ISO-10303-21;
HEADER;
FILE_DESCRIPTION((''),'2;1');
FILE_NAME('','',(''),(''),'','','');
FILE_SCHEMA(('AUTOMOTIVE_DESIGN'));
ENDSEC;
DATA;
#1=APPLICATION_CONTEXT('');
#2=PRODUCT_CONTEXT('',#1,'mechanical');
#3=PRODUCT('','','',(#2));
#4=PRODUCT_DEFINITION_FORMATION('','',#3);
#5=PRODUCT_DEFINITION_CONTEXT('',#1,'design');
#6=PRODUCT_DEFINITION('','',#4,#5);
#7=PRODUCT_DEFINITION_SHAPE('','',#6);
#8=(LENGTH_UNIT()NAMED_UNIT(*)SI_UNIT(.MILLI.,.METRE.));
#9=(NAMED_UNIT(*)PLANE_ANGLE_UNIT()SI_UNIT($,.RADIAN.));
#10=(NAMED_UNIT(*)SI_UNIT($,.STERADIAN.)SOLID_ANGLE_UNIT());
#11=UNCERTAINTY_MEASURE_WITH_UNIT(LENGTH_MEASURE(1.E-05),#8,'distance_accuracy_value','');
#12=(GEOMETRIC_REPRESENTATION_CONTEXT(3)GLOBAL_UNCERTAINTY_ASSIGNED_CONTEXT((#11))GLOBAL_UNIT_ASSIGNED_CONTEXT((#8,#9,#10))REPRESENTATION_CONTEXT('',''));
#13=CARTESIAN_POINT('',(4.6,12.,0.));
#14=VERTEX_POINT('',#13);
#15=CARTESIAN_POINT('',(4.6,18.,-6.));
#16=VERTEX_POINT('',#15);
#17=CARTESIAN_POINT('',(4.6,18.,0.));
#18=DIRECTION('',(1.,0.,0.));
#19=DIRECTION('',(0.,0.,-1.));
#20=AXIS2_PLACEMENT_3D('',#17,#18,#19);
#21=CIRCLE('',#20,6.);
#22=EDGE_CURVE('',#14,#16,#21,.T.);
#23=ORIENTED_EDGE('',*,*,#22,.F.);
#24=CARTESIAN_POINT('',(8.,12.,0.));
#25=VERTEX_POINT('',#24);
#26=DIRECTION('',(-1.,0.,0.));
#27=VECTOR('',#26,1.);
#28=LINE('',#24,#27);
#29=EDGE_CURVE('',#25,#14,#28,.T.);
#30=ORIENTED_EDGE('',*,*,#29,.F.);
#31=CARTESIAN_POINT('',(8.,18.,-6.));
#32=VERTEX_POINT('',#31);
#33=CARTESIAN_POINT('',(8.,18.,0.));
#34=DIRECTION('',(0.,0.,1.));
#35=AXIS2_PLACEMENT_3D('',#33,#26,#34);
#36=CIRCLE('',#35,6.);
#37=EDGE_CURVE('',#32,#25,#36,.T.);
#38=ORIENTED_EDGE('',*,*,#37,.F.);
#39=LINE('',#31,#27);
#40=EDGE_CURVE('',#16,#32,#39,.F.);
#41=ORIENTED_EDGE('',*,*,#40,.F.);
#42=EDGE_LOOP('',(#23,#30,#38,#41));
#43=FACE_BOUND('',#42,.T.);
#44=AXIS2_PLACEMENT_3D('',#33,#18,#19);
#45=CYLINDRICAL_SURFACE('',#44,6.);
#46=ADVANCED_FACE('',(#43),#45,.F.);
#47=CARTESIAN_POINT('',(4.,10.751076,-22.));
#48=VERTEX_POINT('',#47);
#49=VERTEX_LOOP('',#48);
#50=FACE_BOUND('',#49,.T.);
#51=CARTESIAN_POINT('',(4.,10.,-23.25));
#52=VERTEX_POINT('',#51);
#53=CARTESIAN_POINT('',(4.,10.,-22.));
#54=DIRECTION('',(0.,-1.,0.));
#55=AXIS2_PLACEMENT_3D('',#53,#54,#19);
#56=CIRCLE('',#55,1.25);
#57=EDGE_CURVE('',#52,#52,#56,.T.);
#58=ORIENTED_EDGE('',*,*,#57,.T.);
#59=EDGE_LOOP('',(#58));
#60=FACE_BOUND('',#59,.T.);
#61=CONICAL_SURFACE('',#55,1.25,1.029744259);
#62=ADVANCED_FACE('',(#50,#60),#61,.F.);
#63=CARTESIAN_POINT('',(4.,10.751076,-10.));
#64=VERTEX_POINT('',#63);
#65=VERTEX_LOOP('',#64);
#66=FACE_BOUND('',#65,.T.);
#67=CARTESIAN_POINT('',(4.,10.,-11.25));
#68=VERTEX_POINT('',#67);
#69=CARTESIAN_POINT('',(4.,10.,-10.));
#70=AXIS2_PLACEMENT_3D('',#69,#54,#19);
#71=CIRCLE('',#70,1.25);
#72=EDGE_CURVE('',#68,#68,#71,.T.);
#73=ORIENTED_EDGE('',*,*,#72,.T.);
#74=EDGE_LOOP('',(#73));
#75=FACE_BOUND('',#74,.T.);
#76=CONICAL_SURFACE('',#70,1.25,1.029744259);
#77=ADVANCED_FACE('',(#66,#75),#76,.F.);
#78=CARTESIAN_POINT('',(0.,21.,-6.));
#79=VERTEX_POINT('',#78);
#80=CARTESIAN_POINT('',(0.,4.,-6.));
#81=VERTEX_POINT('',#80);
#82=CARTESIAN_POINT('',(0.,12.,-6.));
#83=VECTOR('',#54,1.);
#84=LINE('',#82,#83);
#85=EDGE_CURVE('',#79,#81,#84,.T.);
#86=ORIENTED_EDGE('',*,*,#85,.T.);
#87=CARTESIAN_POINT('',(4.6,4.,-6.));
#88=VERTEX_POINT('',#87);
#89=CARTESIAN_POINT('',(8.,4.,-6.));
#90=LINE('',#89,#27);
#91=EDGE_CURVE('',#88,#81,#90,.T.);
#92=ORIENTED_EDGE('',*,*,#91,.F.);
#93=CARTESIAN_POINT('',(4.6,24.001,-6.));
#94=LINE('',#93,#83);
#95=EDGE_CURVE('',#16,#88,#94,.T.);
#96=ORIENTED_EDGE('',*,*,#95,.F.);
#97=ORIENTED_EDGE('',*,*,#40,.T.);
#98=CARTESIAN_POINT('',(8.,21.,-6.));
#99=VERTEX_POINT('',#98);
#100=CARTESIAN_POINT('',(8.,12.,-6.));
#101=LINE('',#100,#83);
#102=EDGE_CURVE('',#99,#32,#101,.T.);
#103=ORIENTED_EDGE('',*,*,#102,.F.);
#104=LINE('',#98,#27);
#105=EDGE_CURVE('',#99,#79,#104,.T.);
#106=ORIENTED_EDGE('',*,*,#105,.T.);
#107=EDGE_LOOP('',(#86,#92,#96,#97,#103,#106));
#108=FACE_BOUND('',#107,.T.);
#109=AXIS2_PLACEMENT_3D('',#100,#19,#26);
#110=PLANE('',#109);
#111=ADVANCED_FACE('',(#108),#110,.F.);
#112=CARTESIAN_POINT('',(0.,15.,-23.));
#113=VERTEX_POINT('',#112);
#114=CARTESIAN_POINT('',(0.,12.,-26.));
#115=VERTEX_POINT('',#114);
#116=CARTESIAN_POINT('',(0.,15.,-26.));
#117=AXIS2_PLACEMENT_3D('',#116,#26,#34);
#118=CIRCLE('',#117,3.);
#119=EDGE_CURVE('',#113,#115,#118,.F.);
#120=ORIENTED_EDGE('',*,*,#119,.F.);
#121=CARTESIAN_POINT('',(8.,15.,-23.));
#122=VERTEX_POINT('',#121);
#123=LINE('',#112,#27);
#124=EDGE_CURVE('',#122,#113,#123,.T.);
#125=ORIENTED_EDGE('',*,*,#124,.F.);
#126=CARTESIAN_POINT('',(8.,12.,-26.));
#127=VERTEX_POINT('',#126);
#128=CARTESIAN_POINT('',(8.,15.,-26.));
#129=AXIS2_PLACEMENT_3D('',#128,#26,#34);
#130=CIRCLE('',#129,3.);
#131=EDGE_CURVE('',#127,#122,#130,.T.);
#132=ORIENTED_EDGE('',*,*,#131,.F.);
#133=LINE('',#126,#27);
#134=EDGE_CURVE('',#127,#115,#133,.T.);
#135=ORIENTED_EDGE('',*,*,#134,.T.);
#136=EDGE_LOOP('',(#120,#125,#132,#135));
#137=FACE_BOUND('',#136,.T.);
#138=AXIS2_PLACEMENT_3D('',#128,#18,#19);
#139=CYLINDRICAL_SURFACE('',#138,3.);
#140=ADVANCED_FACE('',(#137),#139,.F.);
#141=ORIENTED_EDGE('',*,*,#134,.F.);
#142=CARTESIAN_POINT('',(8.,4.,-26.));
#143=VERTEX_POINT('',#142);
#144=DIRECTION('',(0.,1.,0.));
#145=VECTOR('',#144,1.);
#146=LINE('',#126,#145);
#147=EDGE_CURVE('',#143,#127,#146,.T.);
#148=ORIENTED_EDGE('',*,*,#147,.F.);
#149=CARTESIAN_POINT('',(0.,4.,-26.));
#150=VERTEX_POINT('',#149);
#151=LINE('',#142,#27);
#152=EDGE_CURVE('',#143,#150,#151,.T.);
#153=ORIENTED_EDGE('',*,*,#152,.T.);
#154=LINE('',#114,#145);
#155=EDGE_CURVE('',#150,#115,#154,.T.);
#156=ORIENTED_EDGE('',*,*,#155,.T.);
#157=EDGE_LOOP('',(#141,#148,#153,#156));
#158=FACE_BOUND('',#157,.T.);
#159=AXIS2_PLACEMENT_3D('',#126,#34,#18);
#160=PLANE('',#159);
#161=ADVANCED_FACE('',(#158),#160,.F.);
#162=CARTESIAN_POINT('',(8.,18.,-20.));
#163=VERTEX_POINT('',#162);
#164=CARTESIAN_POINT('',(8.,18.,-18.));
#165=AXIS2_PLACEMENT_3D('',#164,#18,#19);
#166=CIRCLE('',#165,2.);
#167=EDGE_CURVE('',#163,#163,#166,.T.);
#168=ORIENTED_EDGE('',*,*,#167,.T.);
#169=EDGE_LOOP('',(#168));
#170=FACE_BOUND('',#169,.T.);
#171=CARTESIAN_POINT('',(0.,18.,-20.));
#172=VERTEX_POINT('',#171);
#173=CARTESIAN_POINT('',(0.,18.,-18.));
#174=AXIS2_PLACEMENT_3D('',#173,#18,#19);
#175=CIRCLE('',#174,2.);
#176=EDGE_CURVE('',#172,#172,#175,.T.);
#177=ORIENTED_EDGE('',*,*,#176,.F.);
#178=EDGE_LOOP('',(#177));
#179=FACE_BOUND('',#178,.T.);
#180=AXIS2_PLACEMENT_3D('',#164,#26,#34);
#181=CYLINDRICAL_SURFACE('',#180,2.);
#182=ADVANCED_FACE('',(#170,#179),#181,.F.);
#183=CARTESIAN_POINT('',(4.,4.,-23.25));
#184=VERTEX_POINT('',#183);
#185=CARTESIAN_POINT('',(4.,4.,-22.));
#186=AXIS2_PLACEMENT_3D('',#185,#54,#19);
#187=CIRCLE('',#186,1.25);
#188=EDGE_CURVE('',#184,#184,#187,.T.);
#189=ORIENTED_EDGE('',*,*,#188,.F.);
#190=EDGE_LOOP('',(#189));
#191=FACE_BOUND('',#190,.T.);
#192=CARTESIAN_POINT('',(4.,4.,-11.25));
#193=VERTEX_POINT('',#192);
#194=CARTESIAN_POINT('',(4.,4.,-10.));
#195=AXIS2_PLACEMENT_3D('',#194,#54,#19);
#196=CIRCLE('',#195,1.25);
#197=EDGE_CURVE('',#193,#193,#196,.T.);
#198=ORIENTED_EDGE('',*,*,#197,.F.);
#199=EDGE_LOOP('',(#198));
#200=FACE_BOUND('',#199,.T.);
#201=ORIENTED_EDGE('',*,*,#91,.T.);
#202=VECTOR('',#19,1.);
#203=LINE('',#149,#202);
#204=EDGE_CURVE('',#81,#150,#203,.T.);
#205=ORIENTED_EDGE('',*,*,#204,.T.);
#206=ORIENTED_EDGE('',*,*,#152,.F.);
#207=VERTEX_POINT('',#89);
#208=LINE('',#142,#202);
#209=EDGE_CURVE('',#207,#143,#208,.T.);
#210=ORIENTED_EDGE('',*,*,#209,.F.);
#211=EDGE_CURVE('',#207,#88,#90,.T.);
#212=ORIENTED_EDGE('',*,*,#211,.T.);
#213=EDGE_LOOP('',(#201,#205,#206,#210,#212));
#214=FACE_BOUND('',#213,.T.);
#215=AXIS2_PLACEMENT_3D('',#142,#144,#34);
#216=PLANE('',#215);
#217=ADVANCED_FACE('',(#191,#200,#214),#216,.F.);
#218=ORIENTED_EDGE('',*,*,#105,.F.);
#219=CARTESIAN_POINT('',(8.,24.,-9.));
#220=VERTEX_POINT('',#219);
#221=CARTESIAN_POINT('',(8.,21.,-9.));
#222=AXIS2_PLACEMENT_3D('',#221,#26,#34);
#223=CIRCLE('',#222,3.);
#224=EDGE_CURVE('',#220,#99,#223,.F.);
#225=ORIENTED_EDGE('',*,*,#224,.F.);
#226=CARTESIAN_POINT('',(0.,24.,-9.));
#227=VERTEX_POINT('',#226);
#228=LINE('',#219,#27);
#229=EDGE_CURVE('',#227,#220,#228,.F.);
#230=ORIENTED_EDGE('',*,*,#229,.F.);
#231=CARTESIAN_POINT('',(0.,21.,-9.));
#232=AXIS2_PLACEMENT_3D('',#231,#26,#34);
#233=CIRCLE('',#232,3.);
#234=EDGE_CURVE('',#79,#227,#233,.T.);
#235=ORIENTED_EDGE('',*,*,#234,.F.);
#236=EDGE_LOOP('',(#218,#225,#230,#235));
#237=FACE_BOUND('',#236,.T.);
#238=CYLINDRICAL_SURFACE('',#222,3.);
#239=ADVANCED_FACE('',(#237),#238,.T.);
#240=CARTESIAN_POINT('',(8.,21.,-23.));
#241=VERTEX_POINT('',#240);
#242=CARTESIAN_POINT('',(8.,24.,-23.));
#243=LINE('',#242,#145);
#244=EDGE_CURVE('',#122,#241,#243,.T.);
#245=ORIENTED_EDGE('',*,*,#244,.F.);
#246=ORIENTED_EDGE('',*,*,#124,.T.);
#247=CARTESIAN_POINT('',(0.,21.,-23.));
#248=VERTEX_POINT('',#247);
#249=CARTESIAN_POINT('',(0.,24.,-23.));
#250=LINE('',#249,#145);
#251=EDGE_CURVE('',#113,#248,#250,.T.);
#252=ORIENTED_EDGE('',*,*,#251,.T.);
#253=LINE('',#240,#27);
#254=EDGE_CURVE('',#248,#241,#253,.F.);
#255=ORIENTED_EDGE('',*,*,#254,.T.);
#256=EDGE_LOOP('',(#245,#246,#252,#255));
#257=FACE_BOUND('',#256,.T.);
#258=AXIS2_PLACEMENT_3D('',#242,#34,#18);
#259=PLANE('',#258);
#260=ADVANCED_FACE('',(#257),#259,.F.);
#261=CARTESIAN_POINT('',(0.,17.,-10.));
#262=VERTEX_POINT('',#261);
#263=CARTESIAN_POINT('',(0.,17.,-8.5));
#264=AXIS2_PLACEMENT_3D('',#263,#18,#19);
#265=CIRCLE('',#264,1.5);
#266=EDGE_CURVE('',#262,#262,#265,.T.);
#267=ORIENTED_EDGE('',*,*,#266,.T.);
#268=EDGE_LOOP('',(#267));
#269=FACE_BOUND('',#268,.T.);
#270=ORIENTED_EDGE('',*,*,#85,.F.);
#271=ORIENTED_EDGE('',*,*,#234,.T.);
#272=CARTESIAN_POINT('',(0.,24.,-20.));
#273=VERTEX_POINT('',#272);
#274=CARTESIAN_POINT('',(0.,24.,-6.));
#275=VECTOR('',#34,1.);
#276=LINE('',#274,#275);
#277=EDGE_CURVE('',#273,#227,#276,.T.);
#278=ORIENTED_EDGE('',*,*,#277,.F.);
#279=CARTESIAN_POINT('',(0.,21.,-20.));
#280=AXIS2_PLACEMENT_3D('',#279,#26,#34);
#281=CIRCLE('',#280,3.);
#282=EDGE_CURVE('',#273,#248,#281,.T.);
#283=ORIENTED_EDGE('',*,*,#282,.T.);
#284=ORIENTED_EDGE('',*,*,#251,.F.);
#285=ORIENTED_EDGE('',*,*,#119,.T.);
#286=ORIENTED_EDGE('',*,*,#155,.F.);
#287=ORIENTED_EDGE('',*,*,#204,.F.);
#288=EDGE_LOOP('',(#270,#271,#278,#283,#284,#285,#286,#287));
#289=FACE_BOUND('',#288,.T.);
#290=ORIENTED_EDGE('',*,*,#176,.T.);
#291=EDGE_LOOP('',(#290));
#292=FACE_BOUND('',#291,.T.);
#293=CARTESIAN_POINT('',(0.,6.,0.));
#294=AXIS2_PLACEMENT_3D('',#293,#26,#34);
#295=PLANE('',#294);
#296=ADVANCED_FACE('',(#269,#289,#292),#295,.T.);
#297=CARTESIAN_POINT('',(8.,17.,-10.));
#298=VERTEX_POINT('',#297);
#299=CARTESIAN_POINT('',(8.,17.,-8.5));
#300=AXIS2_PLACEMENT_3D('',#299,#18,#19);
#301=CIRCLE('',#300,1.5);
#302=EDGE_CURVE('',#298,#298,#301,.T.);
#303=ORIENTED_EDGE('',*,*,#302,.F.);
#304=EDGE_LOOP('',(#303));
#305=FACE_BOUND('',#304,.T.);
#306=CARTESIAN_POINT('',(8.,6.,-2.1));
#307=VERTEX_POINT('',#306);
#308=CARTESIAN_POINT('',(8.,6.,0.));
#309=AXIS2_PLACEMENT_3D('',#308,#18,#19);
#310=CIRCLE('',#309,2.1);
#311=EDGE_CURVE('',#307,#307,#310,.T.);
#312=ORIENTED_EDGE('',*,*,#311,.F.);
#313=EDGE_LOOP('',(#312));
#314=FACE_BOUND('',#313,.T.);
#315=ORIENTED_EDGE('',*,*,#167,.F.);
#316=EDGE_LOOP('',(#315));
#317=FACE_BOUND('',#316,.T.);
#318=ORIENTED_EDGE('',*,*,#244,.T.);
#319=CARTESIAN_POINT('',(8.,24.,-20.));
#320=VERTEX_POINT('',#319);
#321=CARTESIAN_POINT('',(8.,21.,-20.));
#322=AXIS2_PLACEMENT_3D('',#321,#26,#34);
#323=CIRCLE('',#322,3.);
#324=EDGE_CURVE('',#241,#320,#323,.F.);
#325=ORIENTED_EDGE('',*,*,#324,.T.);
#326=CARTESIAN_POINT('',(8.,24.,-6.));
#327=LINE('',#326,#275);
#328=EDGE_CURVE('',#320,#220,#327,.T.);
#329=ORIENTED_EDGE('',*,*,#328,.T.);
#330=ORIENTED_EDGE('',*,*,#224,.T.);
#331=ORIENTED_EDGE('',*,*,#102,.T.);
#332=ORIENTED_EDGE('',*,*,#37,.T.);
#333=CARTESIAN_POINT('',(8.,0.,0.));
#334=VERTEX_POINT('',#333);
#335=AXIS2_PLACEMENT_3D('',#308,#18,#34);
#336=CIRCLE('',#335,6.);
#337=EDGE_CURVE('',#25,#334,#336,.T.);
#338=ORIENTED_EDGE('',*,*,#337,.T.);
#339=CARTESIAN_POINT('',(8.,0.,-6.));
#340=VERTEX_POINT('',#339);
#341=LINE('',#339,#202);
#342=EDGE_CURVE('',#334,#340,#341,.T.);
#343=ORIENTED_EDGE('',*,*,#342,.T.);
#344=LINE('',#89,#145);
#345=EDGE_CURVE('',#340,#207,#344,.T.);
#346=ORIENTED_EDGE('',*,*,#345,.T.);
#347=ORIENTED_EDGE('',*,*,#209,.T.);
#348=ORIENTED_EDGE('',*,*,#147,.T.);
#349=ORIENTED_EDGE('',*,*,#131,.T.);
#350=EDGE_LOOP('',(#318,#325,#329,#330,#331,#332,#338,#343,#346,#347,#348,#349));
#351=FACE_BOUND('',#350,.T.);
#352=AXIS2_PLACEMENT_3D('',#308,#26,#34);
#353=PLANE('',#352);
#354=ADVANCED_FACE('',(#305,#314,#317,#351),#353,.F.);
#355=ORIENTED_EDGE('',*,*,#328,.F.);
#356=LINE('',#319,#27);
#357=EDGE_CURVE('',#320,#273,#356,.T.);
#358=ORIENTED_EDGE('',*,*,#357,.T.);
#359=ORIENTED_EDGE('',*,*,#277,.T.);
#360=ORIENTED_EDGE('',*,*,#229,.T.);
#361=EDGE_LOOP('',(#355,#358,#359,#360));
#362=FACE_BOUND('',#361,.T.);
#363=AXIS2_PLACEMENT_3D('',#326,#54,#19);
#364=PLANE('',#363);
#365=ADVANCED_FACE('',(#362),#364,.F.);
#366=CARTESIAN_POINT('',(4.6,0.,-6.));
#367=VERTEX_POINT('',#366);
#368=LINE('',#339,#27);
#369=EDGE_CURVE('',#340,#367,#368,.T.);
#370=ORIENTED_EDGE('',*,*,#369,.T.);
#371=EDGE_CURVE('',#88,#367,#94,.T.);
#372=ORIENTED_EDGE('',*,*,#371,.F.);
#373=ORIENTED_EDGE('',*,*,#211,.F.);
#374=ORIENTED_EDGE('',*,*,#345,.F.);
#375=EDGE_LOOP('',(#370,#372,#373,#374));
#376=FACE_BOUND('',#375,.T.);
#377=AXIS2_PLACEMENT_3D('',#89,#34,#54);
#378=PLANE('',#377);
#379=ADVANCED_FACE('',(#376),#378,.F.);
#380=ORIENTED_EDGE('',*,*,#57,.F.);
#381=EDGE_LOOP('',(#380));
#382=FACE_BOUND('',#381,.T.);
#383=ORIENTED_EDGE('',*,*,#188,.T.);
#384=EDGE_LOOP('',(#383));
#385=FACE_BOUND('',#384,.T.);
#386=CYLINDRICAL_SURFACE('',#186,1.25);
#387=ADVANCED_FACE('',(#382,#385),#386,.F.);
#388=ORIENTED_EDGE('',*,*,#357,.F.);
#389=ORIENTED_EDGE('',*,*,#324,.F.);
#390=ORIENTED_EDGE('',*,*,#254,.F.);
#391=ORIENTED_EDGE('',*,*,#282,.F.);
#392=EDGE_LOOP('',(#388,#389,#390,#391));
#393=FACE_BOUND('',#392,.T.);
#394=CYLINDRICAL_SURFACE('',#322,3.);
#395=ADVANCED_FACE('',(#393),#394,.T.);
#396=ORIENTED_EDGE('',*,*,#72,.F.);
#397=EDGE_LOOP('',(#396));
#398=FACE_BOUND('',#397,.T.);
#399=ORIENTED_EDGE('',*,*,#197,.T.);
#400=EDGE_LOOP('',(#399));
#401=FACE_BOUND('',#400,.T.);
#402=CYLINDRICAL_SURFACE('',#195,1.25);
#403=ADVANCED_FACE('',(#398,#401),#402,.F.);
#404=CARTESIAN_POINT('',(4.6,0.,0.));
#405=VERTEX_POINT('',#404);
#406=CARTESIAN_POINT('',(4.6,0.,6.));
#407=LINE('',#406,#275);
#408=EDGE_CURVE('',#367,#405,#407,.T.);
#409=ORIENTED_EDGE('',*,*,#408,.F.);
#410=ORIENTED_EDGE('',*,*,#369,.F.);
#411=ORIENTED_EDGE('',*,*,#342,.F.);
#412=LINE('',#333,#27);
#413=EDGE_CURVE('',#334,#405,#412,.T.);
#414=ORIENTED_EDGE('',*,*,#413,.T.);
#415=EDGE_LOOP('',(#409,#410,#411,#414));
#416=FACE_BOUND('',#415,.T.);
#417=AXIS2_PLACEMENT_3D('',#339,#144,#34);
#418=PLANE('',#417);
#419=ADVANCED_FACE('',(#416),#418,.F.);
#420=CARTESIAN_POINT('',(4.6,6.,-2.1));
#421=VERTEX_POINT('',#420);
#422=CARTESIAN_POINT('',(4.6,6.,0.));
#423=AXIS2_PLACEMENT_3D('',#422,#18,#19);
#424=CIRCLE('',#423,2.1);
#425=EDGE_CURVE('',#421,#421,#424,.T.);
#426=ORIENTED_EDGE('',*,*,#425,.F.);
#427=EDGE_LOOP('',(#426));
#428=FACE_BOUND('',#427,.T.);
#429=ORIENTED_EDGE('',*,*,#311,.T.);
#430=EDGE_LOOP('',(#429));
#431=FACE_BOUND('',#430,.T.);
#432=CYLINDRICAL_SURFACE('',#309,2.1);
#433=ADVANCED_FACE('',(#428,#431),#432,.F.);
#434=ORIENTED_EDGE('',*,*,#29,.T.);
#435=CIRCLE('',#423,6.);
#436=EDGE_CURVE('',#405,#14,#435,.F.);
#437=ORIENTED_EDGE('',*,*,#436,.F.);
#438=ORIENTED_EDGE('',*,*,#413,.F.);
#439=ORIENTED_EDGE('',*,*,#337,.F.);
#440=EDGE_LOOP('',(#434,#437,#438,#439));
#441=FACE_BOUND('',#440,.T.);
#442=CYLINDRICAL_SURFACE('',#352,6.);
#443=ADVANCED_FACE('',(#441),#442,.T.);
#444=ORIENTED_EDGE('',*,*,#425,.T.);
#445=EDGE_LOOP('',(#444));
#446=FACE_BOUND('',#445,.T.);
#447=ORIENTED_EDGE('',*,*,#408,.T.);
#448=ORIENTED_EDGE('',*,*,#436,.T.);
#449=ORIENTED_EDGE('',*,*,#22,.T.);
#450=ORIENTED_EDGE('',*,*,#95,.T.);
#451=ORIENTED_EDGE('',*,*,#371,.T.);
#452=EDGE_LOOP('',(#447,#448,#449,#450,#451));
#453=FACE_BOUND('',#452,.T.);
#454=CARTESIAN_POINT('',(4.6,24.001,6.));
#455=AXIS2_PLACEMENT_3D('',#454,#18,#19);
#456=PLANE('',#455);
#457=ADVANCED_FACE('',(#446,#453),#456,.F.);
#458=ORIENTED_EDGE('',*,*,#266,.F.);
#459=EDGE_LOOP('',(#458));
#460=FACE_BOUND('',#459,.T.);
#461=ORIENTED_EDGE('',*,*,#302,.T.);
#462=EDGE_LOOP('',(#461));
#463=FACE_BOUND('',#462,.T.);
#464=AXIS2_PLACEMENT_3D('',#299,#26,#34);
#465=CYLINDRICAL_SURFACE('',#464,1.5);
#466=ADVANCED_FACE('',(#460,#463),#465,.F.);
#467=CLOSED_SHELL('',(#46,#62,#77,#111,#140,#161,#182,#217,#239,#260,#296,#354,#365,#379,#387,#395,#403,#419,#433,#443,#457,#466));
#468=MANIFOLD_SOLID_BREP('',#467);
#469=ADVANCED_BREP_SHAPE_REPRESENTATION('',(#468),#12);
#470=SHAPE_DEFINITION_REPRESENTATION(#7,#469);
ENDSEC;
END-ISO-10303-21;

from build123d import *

# Parameters (mm, degrees)
SKETCH1_R                       = 1.5
SKETCH1_R_2                     = 2
BOSS_EXTRUDE1_DEPTH             = 8
FILLET1_R                       = 3
FILLET2_R                       = 6
TAP_DRILL_FOR_M5X0_8_TAP1_D     = 4.2
TAP_DRILL_FOR_M3X0_5_TAP1_D     = 2.5
TAP_DRILL_FOR_M3X0_5_TAP1_DEPTH = 6
TAP_DRILL_FOR_M3X0_5_TAP1_TIP   = 0.751075774
CUT_EXTRUDE1_REACH              = 38.277
SKETCH7_W                       = 4.6
SKETCH7_H                       = 12


with BuildPart() as part:
    # Sketch1 → Boss-Extrude1 (new body)
    with BuildSketch(Plane(origin=(0, 0, 0), x_dir=(0, 0, -1), z_dir=(1, 0, 0))):
        with BuildLine():
            Line((6, 0), (0, 0))
            ThreePointArc((0, 0), (-6, 6), (0, 12))
            Line((0, 12), (6, 12))
            Line((6, 12), (6, 24))
            Line((6, 24), (23, 24))
            Line((23, 24), (23, 12))
            Line((23, 12), (26, 12))
            Line((26, 12), (26, 4))
            Line((26, 4), (6, 4))
            Line((6, 4), (6, 0))
        make_face()
        with Locations((8.5, 17)):
            Circle(SKETCH1_R, mode=Mode.SUBTRACT)
        with Locations((18, 18)):
            Circle(SKETCH1_R_2, mode=Mode.SUBTRACT)
    extrude(amount=BOSS_EXTRUDE1_DEPTH)

    # Fillet1
    fillet1_edges = [part.edges().sort_by_distance(p)[0] for p in [
        (4, 12, -23),
        (4, 24, -6),
        (4, 24, -23),
    ]]
    fillet(fillet1_edges, radius=FILLET1_R - 0.0001)  # a hair under: the kernel refuses the full size

    # Fillet2
    fillet2_edges = [part.edges().sort_by_distance(p)[0] for p in [
        (4, 12, -6),
    ]]
    fillet(fillet2_edges, radius=FILLET2_R - 0.0001)  # a hair under: the kernel refuses the full size

    # Tap Drill for M5x0.8 Tap1 (through all)
    with Locations(Plane(origin=(8, 0, 0), x_dir=(0, 0, -1), z_dir=(1, 0, 0))):
        with Locations((0, 6)):
            Hole(TAP_DRILL_FOR_M5X0_8_TAP1_D / 2)

    # Tap Drill for M3x0.5 Tap1
    with Locations(Plane(origin=(0, 4, 0), x_dir=(-1, 0, 0), z_dir=(0, -1, 0))):
        with Locations((-4, 10), (-4, 22)):
            Hole(TAP_DRILL_FOR_M3X0_5_TAP1_D / 2, depth=TAP_DRILL_FOR_M3X0_5_TAP1_DEPTH)
            with Locations((0, 0, -(TAP_DRILL_FOR_M3X0_5_TAP1_DEPTH + TAP_DRILL_FOR_M3X0_5_TAP1_TIP / 2))):  # 118° drill point
                Cone(0, TAP_DRILL_FOR_M3X0_5_TAP1_D / 2, TAP_DRILL_FOR_M3X0_5_TAP1_TIP, mode=Mode.SUBTRACT)

    # Sketch7 → Cut-Extrude1 (cut, up to next)
    with BuildSketch(Plane.XZ, mode=Mode.PRIVATE) as cut_extrude1_sk1:
        with Locations((2.3, 0)):
            Rectangle(SKETCH7_W, SKETCH7_H)
    cut_extrude1_tool1 = extrude(cut_extrude1_sk1.sketch, amount=-CUT_EXTRUDE1_REACH, mode=Mode.PRIVATE) & part.part
    add(cut_extrude1_tool1.solids().sort_by_distance((2.3, 0, 0))[0], mode=Mode.SUBTRACT)


solid = part.part
